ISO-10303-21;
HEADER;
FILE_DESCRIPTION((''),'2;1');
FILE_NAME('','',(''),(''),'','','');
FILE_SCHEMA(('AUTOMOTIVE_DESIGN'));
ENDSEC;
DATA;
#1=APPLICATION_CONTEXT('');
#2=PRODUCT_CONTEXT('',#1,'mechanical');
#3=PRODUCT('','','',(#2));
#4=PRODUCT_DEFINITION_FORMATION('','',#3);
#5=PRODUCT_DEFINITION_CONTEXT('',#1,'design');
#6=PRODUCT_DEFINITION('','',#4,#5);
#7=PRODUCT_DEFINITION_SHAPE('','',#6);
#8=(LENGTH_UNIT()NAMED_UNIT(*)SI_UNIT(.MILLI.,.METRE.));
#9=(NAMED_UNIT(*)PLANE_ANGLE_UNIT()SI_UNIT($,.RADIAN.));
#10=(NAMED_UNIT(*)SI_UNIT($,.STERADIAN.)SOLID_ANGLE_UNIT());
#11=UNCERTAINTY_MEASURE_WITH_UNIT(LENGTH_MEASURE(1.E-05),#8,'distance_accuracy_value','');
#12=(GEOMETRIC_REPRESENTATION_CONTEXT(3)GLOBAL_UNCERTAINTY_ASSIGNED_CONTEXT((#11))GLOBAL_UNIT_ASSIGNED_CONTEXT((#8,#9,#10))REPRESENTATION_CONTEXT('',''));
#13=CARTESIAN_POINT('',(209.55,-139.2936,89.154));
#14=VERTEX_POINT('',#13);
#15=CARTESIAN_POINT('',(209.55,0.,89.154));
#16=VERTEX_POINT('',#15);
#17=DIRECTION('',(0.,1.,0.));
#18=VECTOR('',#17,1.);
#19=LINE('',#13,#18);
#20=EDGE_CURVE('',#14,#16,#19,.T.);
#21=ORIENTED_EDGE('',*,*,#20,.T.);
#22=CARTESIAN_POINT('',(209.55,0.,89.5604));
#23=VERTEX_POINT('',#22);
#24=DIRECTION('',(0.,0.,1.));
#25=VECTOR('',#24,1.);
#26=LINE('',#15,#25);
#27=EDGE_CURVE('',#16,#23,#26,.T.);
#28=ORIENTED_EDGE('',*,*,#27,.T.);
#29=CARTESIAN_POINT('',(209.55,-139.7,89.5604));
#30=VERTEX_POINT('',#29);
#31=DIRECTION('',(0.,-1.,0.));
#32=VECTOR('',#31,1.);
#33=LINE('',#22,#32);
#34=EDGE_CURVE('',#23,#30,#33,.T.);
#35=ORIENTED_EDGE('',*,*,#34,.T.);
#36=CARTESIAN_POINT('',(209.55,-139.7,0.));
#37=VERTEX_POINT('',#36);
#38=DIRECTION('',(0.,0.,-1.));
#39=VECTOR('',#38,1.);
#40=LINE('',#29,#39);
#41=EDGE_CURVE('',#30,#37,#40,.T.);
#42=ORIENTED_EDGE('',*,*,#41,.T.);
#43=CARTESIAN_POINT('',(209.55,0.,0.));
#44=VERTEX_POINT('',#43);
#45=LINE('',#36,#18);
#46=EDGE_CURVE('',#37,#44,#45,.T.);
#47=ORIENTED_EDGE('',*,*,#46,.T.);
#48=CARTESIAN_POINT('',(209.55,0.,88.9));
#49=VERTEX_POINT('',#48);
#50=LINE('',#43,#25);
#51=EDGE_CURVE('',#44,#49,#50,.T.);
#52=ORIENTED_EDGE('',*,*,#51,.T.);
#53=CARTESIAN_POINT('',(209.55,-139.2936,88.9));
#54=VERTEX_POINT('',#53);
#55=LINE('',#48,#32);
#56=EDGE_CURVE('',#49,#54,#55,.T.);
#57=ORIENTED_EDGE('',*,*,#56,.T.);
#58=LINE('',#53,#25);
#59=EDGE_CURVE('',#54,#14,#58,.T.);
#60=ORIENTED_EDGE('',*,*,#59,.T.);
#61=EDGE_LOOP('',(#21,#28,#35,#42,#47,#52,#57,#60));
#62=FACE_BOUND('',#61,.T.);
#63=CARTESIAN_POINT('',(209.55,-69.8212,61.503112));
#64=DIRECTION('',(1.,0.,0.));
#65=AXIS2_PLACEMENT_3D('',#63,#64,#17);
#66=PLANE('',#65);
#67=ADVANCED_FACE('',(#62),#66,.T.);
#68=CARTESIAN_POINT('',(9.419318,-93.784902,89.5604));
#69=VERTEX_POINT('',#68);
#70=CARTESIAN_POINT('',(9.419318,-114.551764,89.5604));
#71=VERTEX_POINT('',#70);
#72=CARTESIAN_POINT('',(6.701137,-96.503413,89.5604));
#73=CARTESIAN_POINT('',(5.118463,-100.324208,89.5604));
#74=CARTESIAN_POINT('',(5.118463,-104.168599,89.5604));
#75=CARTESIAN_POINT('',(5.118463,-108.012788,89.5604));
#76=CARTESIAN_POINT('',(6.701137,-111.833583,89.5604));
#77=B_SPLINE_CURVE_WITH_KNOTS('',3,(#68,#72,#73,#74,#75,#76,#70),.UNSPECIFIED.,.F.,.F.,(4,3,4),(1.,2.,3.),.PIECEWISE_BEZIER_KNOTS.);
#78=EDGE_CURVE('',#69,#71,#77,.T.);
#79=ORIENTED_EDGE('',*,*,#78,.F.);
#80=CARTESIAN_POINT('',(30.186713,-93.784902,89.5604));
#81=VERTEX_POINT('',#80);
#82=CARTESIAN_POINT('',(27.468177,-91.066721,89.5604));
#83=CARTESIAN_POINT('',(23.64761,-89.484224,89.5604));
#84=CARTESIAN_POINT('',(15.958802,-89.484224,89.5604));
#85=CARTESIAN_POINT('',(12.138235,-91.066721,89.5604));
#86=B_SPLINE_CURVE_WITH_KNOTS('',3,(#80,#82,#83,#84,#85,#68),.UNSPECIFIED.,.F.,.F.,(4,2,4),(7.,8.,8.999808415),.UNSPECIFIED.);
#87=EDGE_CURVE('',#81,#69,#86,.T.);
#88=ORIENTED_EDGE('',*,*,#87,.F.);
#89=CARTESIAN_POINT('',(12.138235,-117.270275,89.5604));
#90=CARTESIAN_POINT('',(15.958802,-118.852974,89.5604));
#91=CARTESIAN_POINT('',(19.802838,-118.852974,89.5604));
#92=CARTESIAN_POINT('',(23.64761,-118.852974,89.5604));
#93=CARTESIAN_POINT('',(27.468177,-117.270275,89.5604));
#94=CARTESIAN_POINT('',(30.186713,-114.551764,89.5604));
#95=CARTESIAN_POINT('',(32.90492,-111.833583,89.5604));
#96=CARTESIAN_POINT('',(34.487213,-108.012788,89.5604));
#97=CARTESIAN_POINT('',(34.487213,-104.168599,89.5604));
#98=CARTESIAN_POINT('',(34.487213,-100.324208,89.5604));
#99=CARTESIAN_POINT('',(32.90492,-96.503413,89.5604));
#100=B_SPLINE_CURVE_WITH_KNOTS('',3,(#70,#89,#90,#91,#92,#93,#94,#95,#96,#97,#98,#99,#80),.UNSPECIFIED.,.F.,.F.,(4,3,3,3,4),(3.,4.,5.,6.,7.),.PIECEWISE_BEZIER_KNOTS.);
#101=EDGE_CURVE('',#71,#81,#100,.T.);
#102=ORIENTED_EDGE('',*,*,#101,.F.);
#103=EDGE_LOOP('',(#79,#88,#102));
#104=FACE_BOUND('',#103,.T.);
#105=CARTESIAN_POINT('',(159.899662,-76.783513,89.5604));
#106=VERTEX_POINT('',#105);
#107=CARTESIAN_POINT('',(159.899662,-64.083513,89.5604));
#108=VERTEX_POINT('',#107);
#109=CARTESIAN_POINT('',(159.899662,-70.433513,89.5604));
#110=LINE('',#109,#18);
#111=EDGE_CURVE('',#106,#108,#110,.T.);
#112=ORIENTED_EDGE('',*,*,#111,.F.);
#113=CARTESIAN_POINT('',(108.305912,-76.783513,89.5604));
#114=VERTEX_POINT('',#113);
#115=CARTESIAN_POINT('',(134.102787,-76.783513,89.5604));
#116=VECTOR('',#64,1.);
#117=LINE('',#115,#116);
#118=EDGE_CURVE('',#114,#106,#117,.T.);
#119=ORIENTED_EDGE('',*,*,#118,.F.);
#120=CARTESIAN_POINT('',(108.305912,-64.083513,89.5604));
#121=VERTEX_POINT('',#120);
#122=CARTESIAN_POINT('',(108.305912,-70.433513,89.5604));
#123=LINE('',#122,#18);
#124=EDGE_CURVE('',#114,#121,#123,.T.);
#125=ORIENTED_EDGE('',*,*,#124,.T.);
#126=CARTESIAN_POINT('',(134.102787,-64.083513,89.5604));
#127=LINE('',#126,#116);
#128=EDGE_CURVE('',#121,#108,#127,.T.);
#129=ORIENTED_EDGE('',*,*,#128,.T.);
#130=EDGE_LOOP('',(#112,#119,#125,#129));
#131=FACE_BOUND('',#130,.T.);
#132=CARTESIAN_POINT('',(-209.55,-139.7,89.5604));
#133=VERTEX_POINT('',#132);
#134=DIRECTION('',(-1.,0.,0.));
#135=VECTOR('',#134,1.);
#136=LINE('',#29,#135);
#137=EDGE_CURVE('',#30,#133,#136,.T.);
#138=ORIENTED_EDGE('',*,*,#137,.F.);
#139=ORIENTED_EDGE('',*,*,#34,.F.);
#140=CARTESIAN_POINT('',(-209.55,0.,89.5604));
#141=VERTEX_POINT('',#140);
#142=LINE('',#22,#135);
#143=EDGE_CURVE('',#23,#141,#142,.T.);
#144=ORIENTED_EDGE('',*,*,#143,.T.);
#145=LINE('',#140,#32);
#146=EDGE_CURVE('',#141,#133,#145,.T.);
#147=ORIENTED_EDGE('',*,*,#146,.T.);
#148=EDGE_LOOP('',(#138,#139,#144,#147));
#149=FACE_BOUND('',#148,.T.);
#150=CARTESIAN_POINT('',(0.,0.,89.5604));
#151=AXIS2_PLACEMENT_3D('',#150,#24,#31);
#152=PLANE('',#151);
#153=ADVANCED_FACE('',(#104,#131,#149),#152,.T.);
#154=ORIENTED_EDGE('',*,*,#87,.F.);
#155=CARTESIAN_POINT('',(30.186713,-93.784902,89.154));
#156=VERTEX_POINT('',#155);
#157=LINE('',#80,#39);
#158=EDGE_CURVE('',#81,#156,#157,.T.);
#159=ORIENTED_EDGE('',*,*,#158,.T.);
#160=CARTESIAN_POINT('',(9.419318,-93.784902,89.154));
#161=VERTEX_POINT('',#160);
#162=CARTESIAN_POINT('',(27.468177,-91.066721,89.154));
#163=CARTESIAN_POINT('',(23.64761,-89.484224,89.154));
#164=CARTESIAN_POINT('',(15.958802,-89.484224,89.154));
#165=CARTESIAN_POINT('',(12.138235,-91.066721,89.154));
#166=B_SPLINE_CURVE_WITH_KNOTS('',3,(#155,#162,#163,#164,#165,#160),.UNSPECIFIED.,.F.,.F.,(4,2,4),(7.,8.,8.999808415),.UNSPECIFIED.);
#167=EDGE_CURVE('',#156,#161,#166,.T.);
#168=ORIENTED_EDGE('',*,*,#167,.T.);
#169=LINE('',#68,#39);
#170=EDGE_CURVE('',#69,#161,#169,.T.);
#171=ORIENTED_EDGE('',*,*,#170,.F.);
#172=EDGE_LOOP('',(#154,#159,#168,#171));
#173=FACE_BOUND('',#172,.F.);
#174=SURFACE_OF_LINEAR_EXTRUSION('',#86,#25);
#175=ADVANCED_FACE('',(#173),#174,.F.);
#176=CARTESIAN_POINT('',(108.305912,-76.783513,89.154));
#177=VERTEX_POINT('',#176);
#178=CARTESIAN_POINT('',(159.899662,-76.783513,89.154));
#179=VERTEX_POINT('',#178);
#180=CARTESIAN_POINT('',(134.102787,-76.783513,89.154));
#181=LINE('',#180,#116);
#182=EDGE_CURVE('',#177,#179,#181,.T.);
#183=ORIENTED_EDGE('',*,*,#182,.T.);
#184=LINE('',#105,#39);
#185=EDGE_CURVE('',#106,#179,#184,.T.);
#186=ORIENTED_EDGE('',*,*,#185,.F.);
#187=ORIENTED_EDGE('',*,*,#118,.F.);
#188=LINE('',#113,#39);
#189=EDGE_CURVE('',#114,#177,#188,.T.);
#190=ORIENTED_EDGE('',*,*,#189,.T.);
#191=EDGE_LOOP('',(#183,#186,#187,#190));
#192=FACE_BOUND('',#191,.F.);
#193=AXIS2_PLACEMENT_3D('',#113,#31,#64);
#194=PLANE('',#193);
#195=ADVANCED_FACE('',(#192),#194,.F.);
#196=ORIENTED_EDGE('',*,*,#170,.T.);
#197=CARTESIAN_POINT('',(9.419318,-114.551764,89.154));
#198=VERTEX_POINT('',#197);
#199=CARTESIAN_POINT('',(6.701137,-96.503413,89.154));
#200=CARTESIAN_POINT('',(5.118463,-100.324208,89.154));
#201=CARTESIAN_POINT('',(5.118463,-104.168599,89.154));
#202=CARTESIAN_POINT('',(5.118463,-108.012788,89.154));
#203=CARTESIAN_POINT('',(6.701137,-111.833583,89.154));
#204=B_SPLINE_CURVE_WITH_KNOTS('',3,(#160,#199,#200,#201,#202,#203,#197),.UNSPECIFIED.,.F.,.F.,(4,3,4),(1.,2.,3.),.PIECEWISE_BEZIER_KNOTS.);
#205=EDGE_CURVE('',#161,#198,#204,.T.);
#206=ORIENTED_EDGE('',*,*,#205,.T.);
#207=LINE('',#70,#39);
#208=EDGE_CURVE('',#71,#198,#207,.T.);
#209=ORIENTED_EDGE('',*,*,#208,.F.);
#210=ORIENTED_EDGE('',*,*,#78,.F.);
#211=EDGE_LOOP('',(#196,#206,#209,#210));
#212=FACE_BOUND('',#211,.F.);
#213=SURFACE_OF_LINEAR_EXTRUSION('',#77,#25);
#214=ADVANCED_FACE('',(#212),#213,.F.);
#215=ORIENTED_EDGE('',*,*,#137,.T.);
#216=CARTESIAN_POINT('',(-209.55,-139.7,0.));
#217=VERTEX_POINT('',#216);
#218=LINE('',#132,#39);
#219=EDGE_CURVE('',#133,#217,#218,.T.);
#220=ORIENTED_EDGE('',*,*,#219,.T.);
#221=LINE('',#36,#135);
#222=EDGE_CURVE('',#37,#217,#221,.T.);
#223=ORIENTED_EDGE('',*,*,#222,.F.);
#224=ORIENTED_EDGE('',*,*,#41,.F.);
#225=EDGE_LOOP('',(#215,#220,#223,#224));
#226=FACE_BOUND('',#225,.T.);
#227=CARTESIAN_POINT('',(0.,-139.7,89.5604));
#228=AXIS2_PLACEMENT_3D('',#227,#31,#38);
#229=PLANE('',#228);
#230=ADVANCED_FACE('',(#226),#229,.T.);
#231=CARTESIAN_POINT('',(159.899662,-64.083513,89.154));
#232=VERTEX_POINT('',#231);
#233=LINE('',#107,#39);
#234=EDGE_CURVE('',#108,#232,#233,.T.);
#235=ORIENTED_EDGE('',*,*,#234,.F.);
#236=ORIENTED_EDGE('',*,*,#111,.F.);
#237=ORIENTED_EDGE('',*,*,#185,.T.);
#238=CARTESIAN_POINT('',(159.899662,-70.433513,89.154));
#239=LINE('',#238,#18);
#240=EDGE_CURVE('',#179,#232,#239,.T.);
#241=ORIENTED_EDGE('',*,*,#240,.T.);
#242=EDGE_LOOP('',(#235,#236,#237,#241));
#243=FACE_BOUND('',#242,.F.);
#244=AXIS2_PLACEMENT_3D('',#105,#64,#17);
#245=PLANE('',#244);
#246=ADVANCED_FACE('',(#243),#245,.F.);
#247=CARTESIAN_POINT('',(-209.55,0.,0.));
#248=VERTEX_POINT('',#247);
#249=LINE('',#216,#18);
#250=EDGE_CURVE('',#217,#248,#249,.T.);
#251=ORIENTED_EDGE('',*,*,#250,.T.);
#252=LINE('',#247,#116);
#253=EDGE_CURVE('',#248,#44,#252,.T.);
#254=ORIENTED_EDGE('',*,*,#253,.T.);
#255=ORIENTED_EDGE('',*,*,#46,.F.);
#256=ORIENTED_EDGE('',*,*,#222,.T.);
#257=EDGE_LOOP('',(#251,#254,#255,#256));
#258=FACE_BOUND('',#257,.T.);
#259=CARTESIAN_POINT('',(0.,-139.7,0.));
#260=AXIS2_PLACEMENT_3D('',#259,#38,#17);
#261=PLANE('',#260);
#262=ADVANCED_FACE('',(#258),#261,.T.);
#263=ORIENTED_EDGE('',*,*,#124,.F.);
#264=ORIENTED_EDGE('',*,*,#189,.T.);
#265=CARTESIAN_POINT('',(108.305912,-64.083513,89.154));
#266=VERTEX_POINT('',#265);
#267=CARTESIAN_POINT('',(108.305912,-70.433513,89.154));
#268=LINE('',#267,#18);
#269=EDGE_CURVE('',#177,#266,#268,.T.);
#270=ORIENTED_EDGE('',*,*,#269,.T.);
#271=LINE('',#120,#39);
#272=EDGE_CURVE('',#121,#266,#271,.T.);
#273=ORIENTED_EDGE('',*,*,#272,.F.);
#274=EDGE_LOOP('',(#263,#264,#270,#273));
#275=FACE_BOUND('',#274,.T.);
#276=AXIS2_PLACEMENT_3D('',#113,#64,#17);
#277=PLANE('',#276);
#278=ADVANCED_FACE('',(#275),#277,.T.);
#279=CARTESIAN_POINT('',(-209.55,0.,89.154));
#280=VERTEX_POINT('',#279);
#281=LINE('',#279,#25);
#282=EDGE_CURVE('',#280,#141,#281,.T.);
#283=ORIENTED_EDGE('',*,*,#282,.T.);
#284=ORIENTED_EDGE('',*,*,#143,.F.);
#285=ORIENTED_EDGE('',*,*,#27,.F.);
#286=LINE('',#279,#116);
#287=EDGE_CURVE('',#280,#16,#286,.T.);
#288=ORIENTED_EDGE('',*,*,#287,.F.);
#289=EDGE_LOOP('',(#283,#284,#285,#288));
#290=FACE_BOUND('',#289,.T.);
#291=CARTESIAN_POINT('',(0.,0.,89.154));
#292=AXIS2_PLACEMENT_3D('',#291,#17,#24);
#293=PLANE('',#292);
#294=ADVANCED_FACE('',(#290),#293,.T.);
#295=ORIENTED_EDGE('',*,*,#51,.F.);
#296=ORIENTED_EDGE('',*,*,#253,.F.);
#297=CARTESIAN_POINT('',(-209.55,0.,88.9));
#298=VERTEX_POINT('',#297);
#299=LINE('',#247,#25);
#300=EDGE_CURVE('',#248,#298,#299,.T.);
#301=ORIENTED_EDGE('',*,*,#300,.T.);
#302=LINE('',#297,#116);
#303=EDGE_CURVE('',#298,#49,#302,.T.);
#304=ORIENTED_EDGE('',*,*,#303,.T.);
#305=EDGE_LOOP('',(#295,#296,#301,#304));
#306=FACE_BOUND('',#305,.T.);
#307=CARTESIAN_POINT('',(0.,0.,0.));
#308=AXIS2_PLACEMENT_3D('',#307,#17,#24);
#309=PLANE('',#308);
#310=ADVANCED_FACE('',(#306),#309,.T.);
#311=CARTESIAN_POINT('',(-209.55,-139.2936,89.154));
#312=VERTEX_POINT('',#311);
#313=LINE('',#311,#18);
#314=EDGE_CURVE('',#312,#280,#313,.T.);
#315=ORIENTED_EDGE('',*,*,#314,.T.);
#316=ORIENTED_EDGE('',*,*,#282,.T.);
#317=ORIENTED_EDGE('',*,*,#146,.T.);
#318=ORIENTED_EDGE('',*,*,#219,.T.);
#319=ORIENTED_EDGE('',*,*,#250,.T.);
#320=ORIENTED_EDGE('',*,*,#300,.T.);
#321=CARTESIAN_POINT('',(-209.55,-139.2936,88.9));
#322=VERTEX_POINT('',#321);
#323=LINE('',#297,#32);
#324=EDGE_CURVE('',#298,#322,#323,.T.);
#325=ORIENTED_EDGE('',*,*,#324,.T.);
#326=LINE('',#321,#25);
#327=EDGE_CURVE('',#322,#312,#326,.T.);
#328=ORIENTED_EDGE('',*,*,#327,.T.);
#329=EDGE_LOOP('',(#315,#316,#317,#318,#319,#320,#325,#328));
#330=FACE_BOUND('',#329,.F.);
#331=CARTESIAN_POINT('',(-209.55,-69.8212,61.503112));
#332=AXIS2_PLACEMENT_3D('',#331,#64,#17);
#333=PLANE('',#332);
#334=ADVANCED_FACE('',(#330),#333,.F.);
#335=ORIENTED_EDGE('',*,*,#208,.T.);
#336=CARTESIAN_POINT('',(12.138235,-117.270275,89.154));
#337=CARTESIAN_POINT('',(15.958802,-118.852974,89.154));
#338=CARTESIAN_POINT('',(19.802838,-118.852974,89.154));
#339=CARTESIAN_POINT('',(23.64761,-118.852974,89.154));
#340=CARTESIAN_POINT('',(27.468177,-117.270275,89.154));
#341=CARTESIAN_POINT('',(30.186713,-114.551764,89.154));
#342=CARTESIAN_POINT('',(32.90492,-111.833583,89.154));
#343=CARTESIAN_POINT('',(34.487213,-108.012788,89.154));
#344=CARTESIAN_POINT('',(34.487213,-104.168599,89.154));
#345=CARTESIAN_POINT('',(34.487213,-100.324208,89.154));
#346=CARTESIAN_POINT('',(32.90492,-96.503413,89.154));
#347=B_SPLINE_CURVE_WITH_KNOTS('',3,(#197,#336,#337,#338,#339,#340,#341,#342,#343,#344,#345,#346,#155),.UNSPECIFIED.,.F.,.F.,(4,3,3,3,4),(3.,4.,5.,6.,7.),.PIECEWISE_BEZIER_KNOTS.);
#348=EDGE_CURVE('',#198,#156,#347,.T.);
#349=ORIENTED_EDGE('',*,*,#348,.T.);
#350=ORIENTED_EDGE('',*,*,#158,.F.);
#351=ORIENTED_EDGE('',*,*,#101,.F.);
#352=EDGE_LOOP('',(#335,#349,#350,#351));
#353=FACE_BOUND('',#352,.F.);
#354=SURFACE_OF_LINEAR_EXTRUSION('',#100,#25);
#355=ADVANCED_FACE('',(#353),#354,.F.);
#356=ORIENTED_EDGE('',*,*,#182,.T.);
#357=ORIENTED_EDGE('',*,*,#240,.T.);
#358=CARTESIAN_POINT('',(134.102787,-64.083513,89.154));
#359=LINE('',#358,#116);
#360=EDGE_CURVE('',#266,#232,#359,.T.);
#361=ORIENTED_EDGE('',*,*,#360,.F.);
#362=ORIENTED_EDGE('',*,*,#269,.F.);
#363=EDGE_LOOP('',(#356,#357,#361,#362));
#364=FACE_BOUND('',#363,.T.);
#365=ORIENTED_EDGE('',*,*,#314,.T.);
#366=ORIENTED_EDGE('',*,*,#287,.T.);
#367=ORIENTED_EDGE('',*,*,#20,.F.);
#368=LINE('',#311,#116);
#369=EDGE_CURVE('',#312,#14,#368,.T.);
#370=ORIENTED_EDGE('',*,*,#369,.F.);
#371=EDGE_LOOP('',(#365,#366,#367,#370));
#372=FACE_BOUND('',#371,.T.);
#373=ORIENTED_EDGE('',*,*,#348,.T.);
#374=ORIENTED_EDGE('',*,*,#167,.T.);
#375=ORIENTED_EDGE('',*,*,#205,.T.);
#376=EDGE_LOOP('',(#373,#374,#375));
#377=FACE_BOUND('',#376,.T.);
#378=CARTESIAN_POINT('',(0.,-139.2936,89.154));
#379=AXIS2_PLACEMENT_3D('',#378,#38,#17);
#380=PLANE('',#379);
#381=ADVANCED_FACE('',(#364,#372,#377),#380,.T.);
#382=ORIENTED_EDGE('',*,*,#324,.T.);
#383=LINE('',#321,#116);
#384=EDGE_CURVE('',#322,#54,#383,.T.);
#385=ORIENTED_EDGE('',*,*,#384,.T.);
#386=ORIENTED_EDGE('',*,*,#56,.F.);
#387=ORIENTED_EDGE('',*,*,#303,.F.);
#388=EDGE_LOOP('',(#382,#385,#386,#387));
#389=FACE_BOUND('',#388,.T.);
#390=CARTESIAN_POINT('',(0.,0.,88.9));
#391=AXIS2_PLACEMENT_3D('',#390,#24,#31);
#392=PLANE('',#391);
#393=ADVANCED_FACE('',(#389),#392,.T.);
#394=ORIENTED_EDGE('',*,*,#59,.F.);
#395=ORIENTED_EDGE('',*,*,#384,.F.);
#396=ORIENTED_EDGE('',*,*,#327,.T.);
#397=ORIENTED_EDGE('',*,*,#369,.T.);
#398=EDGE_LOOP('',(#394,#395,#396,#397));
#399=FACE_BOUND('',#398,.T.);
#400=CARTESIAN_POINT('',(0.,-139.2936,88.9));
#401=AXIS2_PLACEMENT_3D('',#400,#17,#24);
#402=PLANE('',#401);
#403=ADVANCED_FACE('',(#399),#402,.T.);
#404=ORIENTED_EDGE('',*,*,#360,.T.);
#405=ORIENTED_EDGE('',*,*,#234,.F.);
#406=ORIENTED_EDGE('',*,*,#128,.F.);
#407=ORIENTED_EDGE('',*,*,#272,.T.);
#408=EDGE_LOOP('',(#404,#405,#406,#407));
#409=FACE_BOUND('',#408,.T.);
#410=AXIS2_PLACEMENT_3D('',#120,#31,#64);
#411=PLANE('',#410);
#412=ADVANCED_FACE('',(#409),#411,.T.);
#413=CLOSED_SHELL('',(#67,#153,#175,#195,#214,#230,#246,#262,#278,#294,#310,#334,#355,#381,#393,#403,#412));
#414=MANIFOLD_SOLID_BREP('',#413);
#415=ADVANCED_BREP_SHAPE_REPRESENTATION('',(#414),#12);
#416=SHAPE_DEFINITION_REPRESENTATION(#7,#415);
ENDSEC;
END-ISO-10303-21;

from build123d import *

# Parameters (mm, degrees)
F1_DEPTH = 209.55
F2_W     = 51.59375
F2_H     = 12.7
F3_DEPTH = 0.4064


# Not quite as in the source:
# - the dataset's text gives a spline's control points without its knots; the knots are read off the source's solid


with BuildPart() as f1:
    # F0 (on Right) → F1 (new body, symmetric)
    with BuildSketch(Plane.YZ):
        Polygon((-139.7, 0), (0, 0), (0, 88.9), (-139.2936, 88.9), (-139.2936, 89.154), (0, 89.154), (0, 89.5604), (-139.7, 89.5604), align=None)
    extrude(amount=F1_DEPTH, both=True)

    # F2 (on face) → F3 (cut, through all)
    with BuildSketch(Plane.XY.offset(89.5604)):
        with Locations((134.1027867572, -70.4335131599)):
            Rectangle(F2_W, F2_H)
        with BuildLine():
            add(Edge.make_bspline(
                [(30.1867131572, -93.7849015599), (27.4681765572, -91.0667205599), (23.6476101572, -89.4842243599), (19.8028375572, -89.4842243599)],
                knots=[7, 7, 7, 7, 8, 8, 8, 8], degree=3))
            add(Edge.make_bspline(
                [(19.8028375572, -89.4842243599), (15.9588015572, -89.4842243599), (12.1382351572, -91.0667205599), (9.4193175572, -93.7849015599)],
                knots=[0, 0, 0, 0, 1, 1, 1, 1], degree=3))
            add(Edge.make_bspline(
                [(9.4193175572, -93.7849015599), (6.7011365572, -96.5034127599), (5.1184625572, -100.3242077599), (5.1184625572, -104.1685993599), (5.1184625572, -108.0127877599), (6.7011365572, -111.8335827599), (9.4193175572, -114.5517637599)],
                knots=[1, 1, 1, 1, 2, 2, 2, 3, 3, 3, 3], degree=3))
            add(Edge.make_bspline(
                [(9.4193175572, -114.5517637599), (12.1382351572, -117.2702749599), (15.9588015572, -118.8529743599), (19.8028375572, -118.8529743599), (23.6476101572, -118.8529743599), (27.4681765572, -117.2702749599), (30.1867131572, -114.5517637599), (32.9049195572, -111.8335827599), (34.4872125572, -108.0127877599), (34.4872125572, -104.1685993599), (34.4872125572, -100.3242077599), (32.9049195572, -96.5034127599), (30.1867131572, -93.7849015599)],
                knots=[3, 3, 3, 3, 4, 4, 4, 5, 5, 5, 6, 6, 6, 7, 7, 7, 7], degree=3))
        make_face()
    extrude(amount=-F3_DEPTH, mode=Mode.SUBTRACT)


solid = f1.part
